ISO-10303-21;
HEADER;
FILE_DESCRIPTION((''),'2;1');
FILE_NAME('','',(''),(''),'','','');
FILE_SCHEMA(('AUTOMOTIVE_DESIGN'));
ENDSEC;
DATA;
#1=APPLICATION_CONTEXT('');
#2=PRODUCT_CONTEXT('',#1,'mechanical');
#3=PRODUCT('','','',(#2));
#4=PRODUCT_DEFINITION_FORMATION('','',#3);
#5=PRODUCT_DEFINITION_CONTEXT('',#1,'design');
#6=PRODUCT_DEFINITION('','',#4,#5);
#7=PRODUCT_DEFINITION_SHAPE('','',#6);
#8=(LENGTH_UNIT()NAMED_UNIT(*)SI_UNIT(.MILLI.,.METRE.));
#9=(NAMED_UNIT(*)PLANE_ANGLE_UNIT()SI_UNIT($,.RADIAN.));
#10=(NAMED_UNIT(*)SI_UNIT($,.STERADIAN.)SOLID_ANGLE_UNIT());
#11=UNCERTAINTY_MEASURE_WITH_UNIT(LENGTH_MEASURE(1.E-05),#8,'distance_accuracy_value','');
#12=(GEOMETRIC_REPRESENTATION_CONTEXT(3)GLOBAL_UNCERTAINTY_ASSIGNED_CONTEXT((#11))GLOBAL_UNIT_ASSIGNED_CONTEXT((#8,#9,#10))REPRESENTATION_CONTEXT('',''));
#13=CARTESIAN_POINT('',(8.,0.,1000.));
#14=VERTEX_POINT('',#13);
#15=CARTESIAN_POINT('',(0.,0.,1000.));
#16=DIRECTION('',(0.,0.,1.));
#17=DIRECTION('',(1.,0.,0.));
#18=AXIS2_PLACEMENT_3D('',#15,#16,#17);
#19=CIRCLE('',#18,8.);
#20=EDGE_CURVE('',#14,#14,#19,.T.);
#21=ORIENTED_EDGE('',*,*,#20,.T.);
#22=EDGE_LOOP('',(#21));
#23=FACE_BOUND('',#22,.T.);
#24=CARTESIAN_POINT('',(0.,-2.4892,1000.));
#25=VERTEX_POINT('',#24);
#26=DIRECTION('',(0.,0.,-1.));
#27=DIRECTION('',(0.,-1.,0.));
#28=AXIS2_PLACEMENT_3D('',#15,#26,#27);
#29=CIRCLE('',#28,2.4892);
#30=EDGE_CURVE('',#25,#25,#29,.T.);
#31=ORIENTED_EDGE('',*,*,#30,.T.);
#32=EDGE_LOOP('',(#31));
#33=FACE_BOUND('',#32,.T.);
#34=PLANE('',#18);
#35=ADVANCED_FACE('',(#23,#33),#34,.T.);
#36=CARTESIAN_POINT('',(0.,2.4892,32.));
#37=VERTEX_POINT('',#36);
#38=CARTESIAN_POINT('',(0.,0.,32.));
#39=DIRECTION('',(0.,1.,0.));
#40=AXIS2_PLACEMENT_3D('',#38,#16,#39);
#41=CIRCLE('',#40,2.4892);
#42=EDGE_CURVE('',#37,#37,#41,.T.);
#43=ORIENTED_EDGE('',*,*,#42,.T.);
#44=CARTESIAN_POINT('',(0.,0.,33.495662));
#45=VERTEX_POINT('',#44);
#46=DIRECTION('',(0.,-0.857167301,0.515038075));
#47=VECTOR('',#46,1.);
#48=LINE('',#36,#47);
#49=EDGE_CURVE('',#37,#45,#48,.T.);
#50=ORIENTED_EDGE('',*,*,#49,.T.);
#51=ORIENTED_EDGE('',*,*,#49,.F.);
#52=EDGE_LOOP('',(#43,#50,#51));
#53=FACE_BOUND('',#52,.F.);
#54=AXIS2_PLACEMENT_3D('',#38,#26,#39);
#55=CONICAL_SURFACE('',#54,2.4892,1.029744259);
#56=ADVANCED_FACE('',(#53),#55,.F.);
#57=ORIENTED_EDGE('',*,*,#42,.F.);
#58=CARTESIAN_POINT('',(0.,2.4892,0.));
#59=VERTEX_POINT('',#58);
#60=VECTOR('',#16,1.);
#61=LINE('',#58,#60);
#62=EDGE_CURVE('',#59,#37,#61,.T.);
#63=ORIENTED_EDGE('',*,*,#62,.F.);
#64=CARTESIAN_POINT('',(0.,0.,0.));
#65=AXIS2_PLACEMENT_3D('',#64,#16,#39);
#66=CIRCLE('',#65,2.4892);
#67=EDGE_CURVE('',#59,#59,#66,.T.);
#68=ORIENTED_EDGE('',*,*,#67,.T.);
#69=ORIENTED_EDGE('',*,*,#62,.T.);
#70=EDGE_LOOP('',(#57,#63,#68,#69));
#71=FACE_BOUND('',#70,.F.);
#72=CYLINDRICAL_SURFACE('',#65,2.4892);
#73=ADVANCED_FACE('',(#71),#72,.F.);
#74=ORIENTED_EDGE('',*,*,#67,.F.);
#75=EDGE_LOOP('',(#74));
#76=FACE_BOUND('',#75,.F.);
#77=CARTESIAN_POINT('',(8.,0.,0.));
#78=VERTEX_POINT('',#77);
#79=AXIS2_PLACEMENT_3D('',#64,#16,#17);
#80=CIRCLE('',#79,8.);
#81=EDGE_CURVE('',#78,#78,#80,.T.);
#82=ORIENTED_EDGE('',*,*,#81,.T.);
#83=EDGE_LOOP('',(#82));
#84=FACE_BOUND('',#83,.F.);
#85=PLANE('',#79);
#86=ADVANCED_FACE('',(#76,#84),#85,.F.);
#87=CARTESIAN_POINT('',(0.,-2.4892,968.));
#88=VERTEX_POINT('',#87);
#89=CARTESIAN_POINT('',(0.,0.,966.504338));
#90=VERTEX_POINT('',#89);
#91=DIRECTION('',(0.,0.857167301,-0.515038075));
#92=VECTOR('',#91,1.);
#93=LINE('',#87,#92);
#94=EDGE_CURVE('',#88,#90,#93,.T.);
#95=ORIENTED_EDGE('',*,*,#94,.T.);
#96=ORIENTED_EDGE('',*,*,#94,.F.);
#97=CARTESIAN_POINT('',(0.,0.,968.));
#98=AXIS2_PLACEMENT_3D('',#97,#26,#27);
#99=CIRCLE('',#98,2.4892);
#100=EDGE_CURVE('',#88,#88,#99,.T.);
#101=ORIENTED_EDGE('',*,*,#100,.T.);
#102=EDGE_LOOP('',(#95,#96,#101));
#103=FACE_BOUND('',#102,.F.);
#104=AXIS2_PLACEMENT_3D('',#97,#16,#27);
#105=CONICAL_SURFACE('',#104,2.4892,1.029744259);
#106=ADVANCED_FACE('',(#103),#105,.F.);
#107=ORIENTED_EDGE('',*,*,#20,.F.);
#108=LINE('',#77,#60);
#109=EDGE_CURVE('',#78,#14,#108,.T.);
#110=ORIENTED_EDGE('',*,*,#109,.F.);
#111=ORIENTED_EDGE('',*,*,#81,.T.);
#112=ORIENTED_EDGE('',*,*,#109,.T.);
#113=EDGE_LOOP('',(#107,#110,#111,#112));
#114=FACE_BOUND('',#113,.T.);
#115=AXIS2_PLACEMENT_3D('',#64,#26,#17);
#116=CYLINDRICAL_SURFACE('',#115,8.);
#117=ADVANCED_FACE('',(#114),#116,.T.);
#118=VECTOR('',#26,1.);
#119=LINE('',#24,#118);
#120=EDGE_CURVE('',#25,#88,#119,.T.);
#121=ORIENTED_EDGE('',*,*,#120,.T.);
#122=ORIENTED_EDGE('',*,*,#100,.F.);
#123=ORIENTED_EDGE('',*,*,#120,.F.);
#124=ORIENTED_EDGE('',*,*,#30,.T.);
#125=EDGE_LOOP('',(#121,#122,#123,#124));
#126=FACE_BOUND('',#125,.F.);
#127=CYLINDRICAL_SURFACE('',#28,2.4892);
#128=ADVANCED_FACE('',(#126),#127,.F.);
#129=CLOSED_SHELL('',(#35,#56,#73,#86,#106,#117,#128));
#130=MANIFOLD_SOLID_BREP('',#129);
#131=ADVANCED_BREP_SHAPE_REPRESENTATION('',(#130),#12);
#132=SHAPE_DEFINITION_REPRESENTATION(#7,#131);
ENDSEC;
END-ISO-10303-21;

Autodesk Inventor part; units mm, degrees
ref_plane "YZ Plane" through (0, 0, 0) normal (1, 0, 0) x (0, 1, 0)
ref_plane "XZ Plane" through (0, 0, 0) normal (0, 1, 0) x (-1, 0, 0)
ref_plane "XY Plane" through (0, 0, 0) normal (0, 0, 1) x (1, 0, 0)
sketch "Szkic1" plane through (0, 0, 0) normal (0, 0, 1) x (1, 0, 0)
  circle A0 centre (0, 0) radius 8
  line L0 (0, 8) -> (0, 0) construction
  dimension "d0" = 16
extrude "Wyciągnięcie proste1" add sketch "Szkic1" along normal blind 1000
sketch "Szkic2" plane through (0, 0, 1000) normal (0, 0, 1) x (1, 0, 0)
  circle A0 centre (0, 0) radius 8 projected
  line L0 (0, 8) -> (0, -8)
  line L1 (-8, 0) -> (8, 0)
hole "Otwór1" at (0, 0, 1000) direction (0, 0, -1) diameter 4.9784 depth 32 tip angle 118 thread size "1/4-20 UNC" class "2B" standard "ANSI Unified Screw Threads"
sketch "Szkic3" plane through (0, 0, 0) normal (0, 0, -1) x (-1, 0, 0)
  circle A0 centre (0, 0) radius 8 projected
  line L0 (0, 8) -> (0, -8)
  line L1 (-8, 0) -> (8, 0)
hole "Otwór2" at (0, 0, 0) direction (0, 0, 1) diameter 4.9784 depth 32 tip angle 118 thread size "1/4-20 UNC" class "2B" standard "ANSI Unified Screw Threads"
properties part number "walek_liniowy_fi16_L1000"
